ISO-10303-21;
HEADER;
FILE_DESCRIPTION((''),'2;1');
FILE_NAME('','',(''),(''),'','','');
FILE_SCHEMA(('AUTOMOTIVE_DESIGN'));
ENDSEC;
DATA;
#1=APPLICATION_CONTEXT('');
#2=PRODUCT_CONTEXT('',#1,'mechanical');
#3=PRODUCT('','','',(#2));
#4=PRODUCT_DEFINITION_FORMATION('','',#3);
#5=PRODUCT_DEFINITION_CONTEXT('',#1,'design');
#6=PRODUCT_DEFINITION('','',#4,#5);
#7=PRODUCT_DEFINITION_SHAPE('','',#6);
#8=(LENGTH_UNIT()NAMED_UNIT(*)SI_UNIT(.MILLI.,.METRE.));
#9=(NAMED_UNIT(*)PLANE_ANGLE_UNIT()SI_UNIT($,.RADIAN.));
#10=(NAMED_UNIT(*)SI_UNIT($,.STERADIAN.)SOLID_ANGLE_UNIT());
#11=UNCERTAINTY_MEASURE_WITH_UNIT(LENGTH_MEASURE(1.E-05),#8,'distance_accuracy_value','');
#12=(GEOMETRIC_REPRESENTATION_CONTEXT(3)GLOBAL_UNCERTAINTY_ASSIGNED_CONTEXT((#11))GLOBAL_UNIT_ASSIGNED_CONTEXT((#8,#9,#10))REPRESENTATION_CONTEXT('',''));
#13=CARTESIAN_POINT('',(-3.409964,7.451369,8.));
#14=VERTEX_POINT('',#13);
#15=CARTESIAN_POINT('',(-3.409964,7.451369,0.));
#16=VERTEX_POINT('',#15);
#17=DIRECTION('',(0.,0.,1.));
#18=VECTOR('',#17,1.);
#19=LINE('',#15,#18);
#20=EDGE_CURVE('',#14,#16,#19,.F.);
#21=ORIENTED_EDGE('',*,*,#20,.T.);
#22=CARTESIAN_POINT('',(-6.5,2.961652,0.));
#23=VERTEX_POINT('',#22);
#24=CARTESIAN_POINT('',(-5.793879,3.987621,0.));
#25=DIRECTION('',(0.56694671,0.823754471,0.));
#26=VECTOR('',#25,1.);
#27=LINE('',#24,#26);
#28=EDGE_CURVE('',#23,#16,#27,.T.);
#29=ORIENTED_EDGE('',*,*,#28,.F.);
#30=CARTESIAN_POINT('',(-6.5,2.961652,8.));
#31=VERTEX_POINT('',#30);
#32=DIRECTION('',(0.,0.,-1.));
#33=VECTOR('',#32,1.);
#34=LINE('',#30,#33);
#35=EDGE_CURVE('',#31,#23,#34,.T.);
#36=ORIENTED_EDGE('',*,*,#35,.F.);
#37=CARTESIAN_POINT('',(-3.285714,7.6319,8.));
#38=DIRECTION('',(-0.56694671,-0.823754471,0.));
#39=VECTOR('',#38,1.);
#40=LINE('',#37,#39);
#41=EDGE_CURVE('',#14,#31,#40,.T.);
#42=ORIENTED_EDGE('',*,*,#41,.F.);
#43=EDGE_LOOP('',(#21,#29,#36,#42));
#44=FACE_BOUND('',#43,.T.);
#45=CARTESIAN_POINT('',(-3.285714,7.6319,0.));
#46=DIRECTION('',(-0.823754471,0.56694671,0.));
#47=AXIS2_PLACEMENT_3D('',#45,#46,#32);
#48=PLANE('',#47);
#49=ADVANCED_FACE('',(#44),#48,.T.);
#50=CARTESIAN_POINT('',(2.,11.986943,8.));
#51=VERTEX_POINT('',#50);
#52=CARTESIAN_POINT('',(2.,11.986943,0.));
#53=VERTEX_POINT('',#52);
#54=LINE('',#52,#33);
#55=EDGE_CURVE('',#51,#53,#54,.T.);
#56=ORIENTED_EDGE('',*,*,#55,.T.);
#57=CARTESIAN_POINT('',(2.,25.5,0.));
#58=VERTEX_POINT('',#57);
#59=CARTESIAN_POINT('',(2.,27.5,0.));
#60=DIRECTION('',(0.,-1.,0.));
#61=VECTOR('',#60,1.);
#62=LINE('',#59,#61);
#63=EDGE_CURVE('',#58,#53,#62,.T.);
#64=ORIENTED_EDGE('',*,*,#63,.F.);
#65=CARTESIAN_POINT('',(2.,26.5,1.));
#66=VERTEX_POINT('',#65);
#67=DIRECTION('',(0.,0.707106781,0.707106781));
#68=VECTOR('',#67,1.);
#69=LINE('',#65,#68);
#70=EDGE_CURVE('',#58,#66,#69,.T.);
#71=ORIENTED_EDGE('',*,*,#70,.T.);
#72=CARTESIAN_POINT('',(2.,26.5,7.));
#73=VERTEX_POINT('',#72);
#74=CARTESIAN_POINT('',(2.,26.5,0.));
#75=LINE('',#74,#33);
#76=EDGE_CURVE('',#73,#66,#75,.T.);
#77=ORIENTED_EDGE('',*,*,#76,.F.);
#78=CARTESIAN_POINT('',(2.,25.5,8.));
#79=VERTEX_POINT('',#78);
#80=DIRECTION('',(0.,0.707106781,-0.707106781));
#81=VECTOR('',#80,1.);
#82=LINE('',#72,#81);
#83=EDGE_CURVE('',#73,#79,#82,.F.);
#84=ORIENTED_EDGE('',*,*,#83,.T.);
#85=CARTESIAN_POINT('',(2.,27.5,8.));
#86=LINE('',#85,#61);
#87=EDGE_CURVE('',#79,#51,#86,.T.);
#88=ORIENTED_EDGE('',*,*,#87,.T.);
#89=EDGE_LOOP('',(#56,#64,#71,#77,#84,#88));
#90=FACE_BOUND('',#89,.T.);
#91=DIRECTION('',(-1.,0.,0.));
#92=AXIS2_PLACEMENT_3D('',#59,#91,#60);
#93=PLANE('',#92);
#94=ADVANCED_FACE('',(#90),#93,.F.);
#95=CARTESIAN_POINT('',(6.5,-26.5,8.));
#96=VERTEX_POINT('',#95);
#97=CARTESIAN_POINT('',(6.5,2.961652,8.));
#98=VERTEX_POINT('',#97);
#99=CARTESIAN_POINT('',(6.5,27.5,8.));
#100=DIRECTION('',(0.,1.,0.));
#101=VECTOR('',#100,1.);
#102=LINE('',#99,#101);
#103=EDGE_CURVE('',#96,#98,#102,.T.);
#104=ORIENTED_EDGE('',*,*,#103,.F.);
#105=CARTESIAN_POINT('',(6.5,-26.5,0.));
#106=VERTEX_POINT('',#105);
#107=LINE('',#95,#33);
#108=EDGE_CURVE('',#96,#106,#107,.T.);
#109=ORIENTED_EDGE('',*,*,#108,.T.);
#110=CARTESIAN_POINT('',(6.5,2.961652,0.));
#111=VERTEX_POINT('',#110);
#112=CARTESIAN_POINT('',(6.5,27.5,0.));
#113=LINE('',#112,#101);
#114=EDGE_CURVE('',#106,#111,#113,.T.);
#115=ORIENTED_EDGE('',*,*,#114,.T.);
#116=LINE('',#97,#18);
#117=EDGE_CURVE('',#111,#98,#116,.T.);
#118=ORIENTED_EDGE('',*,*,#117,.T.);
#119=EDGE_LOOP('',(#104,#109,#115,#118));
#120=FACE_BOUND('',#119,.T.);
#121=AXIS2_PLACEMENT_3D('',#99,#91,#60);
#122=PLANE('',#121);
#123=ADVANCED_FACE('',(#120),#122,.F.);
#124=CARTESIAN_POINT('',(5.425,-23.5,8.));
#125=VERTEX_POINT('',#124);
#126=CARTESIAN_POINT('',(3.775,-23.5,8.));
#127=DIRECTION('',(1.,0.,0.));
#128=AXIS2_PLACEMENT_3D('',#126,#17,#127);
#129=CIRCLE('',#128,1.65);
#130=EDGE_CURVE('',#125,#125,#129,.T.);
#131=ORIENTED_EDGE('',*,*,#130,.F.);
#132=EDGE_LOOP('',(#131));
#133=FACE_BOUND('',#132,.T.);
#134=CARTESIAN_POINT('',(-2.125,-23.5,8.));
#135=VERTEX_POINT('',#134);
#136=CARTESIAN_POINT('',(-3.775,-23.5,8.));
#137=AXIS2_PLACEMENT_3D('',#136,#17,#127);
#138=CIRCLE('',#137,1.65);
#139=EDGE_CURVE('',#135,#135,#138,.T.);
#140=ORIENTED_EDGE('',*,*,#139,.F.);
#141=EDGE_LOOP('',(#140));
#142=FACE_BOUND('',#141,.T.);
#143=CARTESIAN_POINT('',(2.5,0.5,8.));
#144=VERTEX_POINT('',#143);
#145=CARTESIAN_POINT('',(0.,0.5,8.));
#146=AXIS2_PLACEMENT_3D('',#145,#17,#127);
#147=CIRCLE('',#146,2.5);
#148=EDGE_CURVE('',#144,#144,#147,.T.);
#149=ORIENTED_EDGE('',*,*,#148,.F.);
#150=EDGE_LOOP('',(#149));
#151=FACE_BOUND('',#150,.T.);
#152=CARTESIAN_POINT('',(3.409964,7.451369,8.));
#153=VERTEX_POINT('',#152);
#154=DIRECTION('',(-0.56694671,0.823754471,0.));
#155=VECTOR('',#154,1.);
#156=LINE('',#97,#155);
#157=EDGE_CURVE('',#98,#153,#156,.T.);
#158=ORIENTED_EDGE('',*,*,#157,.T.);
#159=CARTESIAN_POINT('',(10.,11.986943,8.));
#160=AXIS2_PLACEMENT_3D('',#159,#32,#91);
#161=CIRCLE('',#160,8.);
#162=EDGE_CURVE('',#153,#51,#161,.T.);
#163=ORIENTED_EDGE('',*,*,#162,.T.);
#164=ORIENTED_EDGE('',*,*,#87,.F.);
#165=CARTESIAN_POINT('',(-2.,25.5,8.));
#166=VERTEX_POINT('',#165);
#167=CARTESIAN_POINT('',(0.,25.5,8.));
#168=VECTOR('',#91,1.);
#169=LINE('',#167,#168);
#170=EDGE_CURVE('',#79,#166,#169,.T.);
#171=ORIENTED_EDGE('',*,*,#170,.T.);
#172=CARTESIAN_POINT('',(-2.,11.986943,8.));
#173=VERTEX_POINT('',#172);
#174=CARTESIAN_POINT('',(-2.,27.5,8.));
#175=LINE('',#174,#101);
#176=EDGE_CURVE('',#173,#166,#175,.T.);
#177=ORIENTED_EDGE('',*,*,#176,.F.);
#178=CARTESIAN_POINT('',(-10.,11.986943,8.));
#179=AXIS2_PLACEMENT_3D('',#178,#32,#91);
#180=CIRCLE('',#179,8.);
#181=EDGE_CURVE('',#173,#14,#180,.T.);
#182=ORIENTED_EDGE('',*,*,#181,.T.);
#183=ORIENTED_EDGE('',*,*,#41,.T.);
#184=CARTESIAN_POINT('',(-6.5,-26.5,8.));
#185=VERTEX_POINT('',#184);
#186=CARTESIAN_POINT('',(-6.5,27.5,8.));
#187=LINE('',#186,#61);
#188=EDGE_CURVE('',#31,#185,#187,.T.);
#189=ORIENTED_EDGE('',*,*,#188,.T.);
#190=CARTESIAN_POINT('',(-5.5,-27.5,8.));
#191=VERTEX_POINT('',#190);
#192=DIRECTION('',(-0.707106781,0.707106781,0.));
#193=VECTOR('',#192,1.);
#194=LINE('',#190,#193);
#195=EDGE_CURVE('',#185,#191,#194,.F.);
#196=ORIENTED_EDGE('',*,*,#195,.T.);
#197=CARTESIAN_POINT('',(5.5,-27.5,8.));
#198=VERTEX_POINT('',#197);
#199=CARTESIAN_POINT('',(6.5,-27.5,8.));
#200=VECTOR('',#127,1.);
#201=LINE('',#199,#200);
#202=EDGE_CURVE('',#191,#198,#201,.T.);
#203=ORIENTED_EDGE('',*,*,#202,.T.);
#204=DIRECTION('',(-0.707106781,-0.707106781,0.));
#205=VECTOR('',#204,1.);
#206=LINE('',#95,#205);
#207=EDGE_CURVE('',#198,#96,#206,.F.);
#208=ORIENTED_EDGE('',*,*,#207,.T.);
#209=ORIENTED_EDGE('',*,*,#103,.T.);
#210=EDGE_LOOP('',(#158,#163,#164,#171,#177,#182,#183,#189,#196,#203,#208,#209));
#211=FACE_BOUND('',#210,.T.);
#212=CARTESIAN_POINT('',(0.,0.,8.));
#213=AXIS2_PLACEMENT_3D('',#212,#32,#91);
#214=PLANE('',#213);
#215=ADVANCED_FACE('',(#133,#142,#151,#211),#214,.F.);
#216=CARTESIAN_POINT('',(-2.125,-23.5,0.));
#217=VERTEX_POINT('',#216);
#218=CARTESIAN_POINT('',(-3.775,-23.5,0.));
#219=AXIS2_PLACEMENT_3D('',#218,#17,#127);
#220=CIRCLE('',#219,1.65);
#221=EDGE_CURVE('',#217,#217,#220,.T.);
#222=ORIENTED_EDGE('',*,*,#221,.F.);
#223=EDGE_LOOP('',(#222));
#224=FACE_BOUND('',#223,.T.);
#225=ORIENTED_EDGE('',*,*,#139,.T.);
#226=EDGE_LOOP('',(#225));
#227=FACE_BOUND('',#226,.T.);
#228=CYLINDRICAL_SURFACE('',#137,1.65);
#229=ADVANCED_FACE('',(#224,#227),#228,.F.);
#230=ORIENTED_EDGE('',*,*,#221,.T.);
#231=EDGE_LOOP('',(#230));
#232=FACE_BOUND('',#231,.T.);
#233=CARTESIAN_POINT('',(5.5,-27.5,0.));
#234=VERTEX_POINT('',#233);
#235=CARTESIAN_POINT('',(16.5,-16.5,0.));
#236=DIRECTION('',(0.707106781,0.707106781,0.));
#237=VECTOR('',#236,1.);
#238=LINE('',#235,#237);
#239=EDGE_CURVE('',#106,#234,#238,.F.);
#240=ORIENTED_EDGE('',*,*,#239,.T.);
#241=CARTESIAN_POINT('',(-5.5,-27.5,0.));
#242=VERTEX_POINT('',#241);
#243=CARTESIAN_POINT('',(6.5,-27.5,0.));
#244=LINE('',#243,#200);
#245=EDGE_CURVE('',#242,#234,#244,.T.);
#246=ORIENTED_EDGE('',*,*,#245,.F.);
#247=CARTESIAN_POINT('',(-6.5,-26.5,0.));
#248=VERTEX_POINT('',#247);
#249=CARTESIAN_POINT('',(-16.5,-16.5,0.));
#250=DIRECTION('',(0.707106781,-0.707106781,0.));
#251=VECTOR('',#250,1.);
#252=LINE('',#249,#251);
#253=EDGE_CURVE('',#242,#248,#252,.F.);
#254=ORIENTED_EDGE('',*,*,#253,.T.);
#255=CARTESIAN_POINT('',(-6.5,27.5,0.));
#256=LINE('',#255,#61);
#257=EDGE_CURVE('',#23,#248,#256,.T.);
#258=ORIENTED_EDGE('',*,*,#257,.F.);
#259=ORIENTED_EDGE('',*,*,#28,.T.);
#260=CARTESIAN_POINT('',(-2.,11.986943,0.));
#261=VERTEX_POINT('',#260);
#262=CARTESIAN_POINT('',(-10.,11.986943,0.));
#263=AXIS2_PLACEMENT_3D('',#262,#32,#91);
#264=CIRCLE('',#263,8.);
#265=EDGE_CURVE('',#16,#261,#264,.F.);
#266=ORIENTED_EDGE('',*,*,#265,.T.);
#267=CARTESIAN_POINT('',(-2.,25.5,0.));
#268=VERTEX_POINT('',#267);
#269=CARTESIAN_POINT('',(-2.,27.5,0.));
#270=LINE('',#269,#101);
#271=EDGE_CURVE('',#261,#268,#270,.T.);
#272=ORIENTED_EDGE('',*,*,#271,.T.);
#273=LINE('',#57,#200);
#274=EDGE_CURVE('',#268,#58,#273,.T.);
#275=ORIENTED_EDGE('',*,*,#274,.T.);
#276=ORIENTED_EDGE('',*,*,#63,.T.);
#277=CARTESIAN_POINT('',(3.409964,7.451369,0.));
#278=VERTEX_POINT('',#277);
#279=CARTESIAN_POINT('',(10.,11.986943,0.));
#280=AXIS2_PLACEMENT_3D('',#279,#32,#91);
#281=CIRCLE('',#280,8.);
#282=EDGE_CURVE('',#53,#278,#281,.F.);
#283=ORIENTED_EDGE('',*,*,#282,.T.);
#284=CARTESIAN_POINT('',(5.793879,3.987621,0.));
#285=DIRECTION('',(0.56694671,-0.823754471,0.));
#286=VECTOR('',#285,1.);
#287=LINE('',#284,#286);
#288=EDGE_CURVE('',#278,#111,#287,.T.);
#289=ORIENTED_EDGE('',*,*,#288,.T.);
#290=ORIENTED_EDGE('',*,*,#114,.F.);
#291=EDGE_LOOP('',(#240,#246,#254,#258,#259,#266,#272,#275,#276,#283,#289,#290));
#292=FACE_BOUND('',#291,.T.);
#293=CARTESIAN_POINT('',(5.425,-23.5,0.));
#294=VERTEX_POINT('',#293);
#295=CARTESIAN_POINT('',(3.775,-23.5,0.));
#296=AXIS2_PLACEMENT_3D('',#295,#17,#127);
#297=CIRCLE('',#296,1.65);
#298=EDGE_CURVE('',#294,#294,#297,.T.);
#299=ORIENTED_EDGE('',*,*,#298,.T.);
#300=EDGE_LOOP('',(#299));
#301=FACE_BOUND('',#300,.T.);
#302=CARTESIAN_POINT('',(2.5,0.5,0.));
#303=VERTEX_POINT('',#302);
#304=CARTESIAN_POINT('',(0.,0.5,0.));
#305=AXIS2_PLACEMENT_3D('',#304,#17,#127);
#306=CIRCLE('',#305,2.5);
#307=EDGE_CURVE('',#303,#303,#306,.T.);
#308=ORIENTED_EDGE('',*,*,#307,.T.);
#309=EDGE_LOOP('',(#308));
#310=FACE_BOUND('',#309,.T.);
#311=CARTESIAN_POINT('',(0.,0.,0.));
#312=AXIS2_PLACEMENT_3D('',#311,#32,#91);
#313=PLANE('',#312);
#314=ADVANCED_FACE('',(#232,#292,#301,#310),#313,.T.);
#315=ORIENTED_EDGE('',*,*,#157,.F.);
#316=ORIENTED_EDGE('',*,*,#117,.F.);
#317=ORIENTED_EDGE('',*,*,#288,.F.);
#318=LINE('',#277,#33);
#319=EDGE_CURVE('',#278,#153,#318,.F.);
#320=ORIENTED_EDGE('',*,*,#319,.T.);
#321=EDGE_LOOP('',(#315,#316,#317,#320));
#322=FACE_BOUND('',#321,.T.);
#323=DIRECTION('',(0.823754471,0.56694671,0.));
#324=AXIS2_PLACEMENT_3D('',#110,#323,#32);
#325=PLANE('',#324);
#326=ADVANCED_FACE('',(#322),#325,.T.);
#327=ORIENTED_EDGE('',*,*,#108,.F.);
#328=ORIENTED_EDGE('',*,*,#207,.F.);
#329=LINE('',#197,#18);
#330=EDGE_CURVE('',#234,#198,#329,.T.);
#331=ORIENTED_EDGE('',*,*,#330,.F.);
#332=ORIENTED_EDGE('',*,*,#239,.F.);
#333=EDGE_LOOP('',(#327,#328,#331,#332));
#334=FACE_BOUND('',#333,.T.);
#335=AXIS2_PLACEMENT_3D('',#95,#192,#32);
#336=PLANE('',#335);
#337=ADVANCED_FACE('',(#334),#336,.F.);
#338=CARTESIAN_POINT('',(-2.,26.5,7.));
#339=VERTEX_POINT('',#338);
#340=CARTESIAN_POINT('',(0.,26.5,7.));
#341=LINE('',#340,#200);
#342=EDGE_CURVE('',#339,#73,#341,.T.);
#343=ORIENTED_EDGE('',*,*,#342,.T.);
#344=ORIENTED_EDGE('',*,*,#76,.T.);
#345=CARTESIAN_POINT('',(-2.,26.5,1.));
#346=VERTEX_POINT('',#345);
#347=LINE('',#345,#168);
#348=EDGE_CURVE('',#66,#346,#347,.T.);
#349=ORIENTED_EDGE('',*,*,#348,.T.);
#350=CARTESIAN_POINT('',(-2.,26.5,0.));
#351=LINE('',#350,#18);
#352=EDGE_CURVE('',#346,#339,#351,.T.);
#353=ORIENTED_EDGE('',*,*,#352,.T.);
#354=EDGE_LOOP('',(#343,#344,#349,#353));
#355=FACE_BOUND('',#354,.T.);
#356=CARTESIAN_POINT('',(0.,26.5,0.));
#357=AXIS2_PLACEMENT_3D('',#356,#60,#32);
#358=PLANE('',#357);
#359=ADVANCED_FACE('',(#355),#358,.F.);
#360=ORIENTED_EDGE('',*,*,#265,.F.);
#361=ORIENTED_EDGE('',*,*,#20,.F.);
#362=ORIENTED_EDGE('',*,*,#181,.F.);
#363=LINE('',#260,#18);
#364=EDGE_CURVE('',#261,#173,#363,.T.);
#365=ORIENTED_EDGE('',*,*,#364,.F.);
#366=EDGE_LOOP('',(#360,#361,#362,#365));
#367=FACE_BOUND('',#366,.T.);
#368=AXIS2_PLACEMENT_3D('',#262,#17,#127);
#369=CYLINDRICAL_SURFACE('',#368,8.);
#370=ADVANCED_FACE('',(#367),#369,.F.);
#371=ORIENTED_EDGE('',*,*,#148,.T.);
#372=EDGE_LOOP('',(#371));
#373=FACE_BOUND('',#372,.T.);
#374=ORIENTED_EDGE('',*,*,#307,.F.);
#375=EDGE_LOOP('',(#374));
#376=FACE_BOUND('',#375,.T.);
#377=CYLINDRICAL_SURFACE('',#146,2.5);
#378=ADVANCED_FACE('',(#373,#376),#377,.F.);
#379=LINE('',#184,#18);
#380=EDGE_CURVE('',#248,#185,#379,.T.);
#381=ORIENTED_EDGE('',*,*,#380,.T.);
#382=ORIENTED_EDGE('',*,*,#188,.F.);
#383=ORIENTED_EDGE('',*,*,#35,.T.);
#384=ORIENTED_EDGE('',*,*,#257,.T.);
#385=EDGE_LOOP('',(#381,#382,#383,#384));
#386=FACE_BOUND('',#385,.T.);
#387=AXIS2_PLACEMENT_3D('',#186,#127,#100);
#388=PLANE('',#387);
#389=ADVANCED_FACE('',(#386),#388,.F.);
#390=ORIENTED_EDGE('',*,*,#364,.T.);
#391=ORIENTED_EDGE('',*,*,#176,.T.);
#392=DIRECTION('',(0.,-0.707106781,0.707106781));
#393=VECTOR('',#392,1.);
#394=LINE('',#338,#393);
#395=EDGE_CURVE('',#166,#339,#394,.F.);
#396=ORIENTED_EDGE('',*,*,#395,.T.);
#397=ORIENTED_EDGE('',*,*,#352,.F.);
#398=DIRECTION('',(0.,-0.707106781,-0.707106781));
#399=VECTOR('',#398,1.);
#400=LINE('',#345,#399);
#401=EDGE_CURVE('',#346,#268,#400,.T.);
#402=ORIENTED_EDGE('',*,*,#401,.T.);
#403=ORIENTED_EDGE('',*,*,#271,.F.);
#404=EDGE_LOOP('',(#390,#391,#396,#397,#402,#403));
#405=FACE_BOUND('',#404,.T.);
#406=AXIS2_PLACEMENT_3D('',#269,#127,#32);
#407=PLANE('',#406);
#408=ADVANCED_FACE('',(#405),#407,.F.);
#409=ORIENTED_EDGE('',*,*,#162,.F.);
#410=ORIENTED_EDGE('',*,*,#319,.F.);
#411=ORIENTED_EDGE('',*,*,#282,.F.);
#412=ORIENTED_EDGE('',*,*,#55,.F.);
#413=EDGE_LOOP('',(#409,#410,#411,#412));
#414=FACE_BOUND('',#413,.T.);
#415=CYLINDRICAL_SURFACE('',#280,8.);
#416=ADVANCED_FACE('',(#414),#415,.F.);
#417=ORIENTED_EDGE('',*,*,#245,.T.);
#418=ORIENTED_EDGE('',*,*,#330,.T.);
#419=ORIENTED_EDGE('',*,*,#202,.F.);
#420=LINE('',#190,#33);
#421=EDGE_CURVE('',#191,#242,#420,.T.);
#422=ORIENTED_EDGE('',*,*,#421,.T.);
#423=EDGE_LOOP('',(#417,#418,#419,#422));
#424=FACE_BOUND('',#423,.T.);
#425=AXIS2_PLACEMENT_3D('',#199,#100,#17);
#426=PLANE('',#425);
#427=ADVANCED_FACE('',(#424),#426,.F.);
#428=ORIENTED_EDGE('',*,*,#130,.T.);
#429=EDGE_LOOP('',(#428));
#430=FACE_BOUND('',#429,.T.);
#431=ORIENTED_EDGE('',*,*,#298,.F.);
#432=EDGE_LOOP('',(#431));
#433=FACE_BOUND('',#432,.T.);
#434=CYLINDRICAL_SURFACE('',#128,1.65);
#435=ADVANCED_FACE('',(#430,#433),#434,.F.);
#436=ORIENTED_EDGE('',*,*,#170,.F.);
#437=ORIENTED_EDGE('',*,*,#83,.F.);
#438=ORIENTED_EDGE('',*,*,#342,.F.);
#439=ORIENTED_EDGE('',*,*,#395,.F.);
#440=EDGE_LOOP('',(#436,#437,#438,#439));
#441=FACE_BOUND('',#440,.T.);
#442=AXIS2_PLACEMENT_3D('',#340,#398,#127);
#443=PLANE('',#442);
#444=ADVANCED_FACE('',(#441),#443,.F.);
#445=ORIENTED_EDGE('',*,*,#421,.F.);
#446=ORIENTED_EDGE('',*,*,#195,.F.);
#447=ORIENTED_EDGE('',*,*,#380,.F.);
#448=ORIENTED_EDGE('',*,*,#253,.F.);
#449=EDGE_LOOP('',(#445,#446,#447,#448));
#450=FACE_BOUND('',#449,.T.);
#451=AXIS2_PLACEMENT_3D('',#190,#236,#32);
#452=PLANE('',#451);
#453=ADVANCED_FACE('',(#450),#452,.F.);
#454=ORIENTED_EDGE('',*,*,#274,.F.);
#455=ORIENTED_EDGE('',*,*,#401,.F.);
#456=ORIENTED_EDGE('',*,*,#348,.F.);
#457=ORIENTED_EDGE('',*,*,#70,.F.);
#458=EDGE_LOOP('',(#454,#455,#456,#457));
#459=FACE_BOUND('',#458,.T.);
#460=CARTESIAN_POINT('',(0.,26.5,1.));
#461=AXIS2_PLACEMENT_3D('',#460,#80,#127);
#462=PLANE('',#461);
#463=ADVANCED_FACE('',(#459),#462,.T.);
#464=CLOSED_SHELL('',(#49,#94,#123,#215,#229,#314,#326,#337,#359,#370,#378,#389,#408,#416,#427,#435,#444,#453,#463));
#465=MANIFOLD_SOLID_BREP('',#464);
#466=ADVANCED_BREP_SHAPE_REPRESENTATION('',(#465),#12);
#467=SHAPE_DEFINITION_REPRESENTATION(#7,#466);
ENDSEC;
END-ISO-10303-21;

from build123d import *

# Parameters (mm, degrees)
ESQUISSE1_W                             = 13
ESQUISSE1_H                             = 55
BOSS_EXTRU_1_DEPTH                      = 8
TROUS_DE_CENTRAGE_5_0MMTRANSITIONAL_1_D = 5
ESQUISSE4_W                             = 4.5
ESQUISSE4_H                             = 20
ENL_V_MAT_EXTRU_1_DEPTH                 = 30.368350311
CONG_1_R                                = 2
CHANFREIN1_SIZE                         = 1
TROU_TARAUD_M41_D                       = 3.3
CHANFREIN2_START                        = -1
CHANFREIN2_DEPTH                        = 10
ESQUISSE9_W                             = 8
ESQUISSE9_H                             = 8
ENL_V_MAT_EXTRU_2_DEPTH                 = 30.874738493
ESQUISSE10_W                            = 4
ESQUISSE10_H                            = 8
BOSS_EXTRU_2_DEPTH                      = 7
CHANFREIN3_SIZE                         = 1
BOSS_EXTRU_3_START                      = -8
BOSS_EXTRU_3_DEPTH                      = 8
CONG_2_R                                = 8


with BuildPart() as part:
    # Esquisse1 → Boss.-Extru.1 (new body)
    with BuildSketch(Plane.XY):
        Rectangle(ESQUISSE1_W, ESQUISSE1_H)
    extrude(amount=BOSS_EXTRU_1_DEPTH)

    # Trous de centrage Ø5.0mmTransitional 1 (through all)
    with Locations(Plane.XY.offset(8)):
        with Locations((0, 0.5)):
            Hole(TROUS_DE_CENTRAGE_5_0MMTRANSITIONAL_1_D / 2)

    # Esquisse4 → Enlèv. mat.-Extru.1 (cut, through all)
    with BuildSketch(Plane.XY.offset(8)):
        with Locations((4.25, 17.5)):
            Rectangle(ESQUISSE4_W, ESQUISSE4_H)
        with Locations((-4.25, 17.5)):
            Rectangle(ESQUISSE4_W, ESQUISSE4_H)
    extrude(amount=-ENL_V_MAT_EXTRU_1_DEPTH, mode=Mode.SUBTRACT)

    # Congé1
    cong_1_edges = [part.edges().sort_by_distance(p)[0] for p in [
        (2, 7.5, 4),
        (-2, 7.5, 4),
    ]]
    fillet(cong_1_edges, radius=CONG_1_R)

    # Chanfrein1
    chanfrein1_edges = [part.edges().sort_by_distance(p)[0] for p in [
        (6.5, -27.5, 4),
        (-6.5, -27.5, 4),
    ]]
    chamfer(chanfrein1_edges, length=CHANFREIN1_SIZE)

    # Trou taraudé M41 (through all)
    with Locations(Plane.XY.offset(8)):
        with Locations((-3.775, -23.5), (3.775, -23.5)):
            Hole(TROU_TARAUD_M41_D / 2)

    # Chanfrein2: read off the stored shape, not the designer's step
    # Chanfrein2 outline → Chanfrein2 (cut)
    with BuildSketch(Plane.XY.offset(CHANFREIN2_START)):
        with BuildLine():
            Line((3.285714286, 7.631900453), (6.5, 2.961651585))
            Line((6.5, 2.961651585), (6.5, 7.5))
            Line((6.5, 7.5), (4, 7.5))
            ThreePointArc((4, 7.5), (3.636818981, 7.533251529), (3.285714286, 7.631900453))
        make_face()
        with BuildLine():
            Line((-6.5, 2.961651585), (-3.285714286, 7.631900453))
            ThreePointArc((-3.285714286, 7.631900453), (-3.636818981, 7.533251529), (-4, 7.5))
            Line((-4, 7.5), (-6.5, 7.5))
            Line((-6.5, 7.5), (-6.5, 2.961651585))
        make_face()
    extrude(amount=CHANFREIN2_DEPTH, mode=Mode.SUBTRACT)

    # Esquisse9 → Enlèv. mat.-Extru.2 (cut, through all)
    with BuildSketch(Plane.ZY.offset(2)):
        with Locations((4, 23.5)):
            Rectangle(ESQUISSE9_W, ESQUISSE9_H)
    extrude(amount=-ENL_V_MAT_EXTRU_2_DEPTH, mode=Mode.SUBTRACT)

    # Esquisse10 → Boss.-Extru.2 (add)
    with BuildSketch(Plane(origin=(0, 19.5, 0), x_dir=(1, 0, 0), z_dir=(0, 1, 0))):
        with Locations((0, -4)):
            Rectangle(ESQUISSE10_W, ESQUISSE10_H)
    extrude(amount=BOSS_EXTRU_2_DEPTH)

    # Chanfrein3
    chanfrein3_edges = [part.edges().sort_by_distance(p)[0] for p in [
        (0, 26.5, 0),
        (0, 26.5, 8),
    ]]
    chamfer(chanfrein3_edges, length=CHANFREIN3_SIZE)

    # Esquisse11 → Boss.-Extru.3 (add)
    with BuildSketch(Plane.XY.offset(8).offset(BOSS_EXTRU_3_START)):
        with BuildLine():
            Line((-3.285714286, 7.631900453), (-2, 9.5))
            ThreePointArc((-2, 9.5), (-2.352491058, 8.366106581), (-3.285714286, 7.631900453))
        make_face()
        with BuildLine():
            Line((3.285714286, 7.631900453), (2, 9.5))
            ThreePointArc((2, 9.5), (2.352491058, 8.366106581), (3.285714286, 7.631900453))
        make_face()
    extrude(amount=BOSS_EXTRU_3_DEPTH)

    # Congé2
    cong_2_edges = [part.edges().sort_by_distance(p)[0] for p in [
        (-2, 9.5, 4),
        (2, 9.5, 4),
    ]]
    fillet(cong_2_edges, radius=CONG_2_R)


solid = part.part
